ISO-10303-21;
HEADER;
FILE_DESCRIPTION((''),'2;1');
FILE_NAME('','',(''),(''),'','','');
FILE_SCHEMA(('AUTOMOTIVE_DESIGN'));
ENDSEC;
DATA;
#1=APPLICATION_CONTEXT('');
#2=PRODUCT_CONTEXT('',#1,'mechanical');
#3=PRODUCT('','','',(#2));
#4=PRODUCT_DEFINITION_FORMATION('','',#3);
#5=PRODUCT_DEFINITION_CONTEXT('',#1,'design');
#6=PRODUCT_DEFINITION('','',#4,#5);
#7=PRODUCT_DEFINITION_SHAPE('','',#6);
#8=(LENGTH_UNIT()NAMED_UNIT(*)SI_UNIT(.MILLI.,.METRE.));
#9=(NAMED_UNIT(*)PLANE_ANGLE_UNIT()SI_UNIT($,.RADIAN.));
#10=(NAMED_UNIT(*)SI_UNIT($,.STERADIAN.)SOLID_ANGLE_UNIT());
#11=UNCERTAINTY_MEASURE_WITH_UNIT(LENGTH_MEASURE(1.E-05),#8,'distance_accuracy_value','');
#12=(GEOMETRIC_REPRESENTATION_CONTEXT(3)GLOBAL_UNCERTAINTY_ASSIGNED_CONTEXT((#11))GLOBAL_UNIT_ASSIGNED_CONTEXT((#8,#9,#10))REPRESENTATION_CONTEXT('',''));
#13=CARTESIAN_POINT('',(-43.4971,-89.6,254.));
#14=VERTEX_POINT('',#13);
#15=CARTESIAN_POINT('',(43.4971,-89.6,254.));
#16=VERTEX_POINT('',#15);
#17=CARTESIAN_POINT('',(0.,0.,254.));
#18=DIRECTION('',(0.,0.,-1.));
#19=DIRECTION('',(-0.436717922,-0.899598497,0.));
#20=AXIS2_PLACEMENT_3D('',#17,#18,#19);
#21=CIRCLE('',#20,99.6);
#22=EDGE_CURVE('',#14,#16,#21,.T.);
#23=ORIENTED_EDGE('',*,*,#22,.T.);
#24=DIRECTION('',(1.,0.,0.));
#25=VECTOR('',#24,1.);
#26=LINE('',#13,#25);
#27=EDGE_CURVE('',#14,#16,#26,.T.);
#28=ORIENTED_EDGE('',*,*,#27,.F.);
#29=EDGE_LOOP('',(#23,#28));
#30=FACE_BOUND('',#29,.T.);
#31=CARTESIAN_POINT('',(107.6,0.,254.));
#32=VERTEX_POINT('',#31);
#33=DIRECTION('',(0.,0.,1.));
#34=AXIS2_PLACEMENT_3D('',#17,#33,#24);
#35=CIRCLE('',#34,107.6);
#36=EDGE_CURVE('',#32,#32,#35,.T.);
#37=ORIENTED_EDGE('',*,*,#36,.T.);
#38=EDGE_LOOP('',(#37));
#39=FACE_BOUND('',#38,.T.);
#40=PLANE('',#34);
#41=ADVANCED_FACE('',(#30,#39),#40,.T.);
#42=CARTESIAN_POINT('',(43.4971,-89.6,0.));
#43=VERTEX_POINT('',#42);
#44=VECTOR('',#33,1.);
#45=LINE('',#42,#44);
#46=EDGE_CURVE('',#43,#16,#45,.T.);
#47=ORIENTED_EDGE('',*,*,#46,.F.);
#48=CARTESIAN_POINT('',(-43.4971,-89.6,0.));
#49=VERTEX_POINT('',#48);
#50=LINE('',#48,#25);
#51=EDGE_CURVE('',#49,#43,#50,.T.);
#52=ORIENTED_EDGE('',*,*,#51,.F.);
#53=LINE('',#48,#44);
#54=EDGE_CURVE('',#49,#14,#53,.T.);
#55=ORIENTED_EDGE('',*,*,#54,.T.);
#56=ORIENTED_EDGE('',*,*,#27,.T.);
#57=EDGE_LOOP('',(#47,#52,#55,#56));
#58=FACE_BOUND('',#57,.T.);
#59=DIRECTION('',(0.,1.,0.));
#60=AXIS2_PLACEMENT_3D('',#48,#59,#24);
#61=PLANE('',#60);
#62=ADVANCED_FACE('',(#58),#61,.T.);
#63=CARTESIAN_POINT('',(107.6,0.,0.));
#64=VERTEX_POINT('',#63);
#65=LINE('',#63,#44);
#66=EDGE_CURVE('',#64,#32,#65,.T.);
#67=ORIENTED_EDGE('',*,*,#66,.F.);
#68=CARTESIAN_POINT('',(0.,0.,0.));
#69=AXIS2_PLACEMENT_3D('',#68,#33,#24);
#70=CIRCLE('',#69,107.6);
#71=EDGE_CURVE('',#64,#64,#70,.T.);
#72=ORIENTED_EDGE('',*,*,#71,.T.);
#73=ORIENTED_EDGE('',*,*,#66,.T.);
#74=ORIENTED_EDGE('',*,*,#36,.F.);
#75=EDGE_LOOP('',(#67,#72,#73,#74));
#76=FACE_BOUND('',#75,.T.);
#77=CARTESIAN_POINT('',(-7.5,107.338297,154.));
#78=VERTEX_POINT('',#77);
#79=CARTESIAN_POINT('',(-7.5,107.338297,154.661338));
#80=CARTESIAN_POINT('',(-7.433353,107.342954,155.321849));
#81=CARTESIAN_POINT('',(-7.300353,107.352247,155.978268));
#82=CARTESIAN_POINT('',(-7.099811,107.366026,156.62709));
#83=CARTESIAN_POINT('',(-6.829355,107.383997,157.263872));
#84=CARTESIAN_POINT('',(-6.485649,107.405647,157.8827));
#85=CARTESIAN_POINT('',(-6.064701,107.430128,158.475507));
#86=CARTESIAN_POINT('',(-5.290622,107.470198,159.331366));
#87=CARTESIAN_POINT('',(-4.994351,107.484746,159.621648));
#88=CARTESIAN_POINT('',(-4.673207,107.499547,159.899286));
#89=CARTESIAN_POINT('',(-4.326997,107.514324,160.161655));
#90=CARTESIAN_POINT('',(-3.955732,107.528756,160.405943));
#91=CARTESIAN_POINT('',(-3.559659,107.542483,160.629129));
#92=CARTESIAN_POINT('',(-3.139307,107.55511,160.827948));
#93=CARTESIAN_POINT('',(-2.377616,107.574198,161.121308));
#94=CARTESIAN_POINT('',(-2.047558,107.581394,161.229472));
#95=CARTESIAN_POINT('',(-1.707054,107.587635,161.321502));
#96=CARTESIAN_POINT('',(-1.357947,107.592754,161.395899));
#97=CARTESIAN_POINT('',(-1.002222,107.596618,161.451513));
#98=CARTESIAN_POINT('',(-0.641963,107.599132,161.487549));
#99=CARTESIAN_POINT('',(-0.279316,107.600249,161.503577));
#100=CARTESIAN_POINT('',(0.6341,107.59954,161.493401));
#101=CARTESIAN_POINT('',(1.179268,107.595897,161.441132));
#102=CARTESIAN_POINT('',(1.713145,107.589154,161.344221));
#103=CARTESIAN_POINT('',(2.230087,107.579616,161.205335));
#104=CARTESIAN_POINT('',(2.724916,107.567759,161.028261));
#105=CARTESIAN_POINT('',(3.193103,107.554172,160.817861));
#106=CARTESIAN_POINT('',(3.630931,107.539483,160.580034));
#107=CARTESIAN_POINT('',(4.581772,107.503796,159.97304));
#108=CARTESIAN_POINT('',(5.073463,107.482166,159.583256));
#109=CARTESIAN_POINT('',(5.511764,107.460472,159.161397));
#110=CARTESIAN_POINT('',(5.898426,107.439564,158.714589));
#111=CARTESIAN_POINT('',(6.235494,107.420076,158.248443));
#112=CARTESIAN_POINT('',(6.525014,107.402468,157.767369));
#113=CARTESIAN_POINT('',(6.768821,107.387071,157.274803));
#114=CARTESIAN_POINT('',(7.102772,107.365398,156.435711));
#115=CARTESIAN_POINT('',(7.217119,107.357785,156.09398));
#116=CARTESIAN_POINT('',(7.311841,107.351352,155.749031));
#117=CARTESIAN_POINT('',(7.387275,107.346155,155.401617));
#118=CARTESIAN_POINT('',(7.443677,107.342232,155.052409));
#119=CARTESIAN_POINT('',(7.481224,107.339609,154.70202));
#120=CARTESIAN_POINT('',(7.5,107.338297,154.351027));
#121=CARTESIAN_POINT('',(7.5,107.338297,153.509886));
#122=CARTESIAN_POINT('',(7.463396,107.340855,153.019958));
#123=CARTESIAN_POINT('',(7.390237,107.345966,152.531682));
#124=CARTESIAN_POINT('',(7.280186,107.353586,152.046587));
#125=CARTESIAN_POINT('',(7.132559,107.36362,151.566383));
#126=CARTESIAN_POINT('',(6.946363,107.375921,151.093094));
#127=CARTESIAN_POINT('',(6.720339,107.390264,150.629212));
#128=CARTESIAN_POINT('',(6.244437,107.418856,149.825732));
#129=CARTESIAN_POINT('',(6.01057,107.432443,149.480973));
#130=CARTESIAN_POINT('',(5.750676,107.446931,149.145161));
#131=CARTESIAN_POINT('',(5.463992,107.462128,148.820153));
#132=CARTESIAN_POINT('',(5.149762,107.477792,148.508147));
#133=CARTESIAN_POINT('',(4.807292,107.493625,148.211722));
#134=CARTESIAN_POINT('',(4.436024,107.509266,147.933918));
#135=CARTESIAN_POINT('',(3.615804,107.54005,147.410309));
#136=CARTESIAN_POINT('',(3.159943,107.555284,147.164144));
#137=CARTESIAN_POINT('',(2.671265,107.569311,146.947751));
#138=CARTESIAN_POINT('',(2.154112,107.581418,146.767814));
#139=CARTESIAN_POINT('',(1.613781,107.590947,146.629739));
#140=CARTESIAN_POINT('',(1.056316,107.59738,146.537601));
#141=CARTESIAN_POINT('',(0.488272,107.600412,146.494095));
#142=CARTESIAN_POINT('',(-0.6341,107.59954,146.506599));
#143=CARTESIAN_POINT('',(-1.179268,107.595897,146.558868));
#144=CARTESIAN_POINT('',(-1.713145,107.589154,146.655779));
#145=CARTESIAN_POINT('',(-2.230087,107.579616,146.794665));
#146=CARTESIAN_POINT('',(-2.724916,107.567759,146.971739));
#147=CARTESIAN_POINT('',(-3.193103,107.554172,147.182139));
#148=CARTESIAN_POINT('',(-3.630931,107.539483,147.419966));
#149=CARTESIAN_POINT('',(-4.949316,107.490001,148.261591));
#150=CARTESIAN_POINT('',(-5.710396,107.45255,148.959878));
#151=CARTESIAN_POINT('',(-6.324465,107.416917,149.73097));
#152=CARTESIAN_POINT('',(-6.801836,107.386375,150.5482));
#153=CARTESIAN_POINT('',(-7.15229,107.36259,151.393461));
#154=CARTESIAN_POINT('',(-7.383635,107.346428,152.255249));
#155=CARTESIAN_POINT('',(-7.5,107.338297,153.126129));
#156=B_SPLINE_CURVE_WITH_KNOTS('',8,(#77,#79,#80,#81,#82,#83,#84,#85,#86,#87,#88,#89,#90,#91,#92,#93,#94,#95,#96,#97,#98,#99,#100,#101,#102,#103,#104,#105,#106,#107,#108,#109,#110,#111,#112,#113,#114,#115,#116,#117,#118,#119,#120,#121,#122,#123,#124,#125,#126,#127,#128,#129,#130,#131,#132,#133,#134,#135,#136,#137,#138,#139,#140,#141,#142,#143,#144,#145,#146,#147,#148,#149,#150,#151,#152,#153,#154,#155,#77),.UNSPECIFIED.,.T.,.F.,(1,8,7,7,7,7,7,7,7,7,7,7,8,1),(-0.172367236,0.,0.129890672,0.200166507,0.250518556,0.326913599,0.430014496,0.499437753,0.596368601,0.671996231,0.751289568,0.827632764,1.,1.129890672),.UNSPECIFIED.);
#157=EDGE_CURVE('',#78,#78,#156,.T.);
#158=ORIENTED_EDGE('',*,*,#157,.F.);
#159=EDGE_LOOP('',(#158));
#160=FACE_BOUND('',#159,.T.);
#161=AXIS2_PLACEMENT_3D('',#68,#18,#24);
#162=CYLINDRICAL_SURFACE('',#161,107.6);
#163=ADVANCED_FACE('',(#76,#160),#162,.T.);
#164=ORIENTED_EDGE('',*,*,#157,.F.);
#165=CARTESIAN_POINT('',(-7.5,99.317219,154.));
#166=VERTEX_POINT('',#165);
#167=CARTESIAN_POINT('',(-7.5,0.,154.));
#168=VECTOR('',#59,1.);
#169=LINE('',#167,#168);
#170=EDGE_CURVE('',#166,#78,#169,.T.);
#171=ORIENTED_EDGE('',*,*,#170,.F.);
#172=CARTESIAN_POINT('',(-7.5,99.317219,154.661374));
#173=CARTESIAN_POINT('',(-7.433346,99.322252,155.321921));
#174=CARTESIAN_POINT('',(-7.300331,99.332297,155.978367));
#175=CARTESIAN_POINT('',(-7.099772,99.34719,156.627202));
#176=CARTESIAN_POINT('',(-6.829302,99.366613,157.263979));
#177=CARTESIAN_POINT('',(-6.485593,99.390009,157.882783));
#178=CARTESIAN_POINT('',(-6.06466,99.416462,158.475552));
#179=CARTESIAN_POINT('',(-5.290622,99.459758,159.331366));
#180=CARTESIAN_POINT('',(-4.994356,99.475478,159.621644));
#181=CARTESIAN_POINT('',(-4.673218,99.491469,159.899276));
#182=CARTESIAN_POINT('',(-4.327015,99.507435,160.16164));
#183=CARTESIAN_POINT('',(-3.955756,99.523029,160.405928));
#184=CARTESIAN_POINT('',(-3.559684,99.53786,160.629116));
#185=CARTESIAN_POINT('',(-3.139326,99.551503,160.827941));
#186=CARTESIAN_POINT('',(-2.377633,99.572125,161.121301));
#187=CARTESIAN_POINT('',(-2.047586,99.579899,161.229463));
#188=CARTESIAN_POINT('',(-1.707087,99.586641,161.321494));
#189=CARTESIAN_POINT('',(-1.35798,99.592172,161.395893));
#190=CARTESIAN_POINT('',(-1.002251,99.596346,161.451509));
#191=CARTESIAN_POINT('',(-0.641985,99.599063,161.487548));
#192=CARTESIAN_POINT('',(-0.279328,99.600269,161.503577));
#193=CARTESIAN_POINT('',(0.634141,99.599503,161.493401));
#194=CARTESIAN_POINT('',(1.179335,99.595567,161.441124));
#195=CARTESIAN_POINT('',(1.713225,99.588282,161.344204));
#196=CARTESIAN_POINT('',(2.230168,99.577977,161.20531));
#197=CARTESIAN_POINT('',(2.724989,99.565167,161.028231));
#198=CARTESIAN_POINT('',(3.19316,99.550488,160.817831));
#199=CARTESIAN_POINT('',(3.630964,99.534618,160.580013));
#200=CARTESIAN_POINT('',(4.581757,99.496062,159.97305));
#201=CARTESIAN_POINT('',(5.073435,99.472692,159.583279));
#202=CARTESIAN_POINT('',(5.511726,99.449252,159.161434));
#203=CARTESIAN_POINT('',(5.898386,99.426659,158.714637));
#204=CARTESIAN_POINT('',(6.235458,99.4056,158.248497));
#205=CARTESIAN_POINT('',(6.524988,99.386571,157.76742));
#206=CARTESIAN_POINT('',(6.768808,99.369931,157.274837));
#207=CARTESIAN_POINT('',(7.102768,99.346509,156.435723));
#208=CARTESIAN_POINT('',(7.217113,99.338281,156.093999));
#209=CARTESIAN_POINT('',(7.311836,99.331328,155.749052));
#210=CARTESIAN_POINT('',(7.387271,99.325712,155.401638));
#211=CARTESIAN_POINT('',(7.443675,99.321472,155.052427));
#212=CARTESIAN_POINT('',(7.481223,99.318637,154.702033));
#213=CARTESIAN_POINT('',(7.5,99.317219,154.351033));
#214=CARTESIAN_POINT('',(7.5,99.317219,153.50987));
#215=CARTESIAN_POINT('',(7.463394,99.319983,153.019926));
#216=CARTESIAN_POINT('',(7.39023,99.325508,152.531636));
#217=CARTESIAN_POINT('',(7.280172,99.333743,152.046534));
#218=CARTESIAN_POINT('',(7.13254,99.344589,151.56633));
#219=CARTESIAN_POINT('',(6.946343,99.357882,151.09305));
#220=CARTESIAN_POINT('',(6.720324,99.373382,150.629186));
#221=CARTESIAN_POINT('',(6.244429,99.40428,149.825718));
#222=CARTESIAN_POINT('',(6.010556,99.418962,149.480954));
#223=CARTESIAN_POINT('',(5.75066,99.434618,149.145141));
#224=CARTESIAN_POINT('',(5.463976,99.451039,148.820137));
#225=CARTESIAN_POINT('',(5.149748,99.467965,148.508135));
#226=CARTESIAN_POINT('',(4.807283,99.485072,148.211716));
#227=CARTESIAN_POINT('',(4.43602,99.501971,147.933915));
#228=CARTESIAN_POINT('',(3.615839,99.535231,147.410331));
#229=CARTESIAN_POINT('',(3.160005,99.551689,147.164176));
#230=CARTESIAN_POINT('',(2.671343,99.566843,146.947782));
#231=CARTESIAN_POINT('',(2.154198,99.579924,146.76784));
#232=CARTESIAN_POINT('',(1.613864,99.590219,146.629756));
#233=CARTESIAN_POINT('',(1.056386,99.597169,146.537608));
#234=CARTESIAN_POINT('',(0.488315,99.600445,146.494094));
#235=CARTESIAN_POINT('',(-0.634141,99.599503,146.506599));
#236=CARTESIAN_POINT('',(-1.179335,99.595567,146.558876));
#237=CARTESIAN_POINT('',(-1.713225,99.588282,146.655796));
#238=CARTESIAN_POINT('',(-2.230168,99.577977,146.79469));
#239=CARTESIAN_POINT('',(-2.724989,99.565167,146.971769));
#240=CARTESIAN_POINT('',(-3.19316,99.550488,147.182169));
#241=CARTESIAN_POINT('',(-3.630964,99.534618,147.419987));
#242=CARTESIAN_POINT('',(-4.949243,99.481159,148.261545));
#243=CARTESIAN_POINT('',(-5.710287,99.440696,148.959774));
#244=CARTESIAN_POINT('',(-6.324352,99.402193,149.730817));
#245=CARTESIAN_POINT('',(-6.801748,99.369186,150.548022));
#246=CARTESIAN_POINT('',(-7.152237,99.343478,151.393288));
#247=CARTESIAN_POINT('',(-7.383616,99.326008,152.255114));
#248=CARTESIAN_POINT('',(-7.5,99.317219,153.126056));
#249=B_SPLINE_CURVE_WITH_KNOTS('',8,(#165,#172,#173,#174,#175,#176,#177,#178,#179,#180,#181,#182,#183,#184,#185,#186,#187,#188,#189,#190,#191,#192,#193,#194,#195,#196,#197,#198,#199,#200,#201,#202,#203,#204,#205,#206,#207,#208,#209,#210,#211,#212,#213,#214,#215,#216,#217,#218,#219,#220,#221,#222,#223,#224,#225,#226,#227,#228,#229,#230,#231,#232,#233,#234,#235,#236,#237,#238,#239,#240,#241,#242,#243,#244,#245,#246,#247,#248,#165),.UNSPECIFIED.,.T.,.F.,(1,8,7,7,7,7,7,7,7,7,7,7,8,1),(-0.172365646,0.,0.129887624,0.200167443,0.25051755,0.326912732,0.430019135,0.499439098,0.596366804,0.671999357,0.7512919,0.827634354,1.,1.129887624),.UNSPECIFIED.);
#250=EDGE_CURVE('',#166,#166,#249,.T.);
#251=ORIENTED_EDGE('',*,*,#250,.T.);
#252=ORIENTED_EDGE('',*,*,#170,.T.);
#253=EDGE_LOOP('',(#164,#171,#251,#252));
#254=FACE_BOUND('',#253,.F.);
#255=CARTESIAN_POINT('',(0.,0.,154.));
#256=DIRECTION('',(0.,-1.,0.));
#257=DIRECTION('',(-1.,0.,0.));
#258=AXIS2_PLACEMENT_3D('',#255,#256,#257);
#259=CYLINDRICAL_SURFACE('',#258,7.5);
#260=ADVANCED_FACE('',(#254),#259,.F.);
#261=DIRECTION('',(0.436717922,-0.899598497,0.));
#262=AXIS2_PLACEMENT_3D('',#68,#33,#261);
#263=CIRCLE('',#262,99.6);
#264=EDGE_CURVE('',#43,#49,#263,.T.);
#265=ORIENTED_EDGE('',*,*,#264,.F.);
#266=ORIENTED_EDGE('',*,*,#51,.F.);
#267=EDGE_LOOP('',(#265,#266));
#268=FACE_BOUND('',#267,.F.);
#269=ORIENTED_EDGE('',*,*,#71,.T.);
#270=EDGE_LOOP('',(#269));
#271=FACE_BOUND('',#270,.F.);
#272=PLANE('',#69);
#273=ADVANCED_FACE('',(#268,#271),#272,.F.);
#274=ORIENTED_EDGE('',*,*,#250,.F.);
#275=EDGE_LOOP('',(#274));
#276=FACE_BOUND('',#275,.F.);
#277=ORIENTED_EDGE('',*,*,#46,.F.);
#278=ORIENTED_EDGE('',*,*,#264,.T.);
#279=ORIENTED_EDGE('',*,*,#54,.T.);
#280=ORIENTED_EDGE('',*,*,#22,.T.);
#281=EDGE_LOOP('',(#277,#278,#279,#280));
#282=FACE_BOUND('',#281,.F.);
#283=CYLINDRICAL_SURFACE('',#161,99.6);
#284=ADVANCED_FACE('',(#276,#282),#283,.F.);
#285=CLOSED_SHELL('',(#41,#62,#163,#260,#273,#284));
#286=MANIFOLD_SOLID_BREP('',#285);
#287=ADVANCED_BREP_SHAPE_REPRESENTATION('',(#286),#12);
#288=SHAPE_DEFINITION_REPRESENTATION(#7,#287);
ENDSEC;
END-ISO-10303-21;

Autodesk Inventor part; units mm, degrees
ref_plane "YZ Plane" through (0, 0, 0) normal (1, 0, 0) x (0, 1, 0)
ref_plane "XZ Plane" through (0, 0, 0) normal (0, 1, 0) x (-1, 0, 0)
ref_plane "XY Plane" through (0, 0, 0) normal (0, 0, 1) x (1, 0, 0)
sketch "Sketch1" plane through (0, 0, 0) normal (0, 0, 1) x (1, 0, 0)
  circle A0 centre (0, 0) radius 99.6
  circle A1 centre (0, 0) radius 107.6
  dimension "d0" = 199.2
  dimension "d1" = 8
extrude "Extrusion1" add sketch "Sketch1" along normal blind 254
sketch "Sketch3" plane through (0, 0, 0) normal (0, 0, -1) x (-1, 0, 0)
  circle A0 centre (0, 0) radius 107.6 construction
  circle A1 centre (0, 0) radius 99.6 construction
  arc A2 (-43.4971, -89.6) -> (43.4971, -89.6) centre (0, 0) ccw
  line L0 (0, -99.6) -> (0, -89.6) construction
  line L1 (43.4971, -89.6) -> (-43.4971, -89.6)
  dimension "d11" = 10
extrude "Extrusion3" add sketch "Sketch3" against normal up to surface (254 mm away)
sketch "Sketch4" plane through (0, 0, 0) normal (0, 1, 0) x (-1, 0, 0)
  circle A0 centre (0, 154) radius 7.5
  line L0 (107.6, 254) -> (-107.6, 254) construction
  line L1 (107.6, 0) -> (-107.6, 0) construction
  point P0 (0, 0)
  point P1 (0, 0)
  dimension "d14" = 15
  dimension "d15" = 100
extrude "Extrusion4" cut sketch "Sketch4" along normal up to surface
properties part number "FrontTubeV1_3DPrint"
